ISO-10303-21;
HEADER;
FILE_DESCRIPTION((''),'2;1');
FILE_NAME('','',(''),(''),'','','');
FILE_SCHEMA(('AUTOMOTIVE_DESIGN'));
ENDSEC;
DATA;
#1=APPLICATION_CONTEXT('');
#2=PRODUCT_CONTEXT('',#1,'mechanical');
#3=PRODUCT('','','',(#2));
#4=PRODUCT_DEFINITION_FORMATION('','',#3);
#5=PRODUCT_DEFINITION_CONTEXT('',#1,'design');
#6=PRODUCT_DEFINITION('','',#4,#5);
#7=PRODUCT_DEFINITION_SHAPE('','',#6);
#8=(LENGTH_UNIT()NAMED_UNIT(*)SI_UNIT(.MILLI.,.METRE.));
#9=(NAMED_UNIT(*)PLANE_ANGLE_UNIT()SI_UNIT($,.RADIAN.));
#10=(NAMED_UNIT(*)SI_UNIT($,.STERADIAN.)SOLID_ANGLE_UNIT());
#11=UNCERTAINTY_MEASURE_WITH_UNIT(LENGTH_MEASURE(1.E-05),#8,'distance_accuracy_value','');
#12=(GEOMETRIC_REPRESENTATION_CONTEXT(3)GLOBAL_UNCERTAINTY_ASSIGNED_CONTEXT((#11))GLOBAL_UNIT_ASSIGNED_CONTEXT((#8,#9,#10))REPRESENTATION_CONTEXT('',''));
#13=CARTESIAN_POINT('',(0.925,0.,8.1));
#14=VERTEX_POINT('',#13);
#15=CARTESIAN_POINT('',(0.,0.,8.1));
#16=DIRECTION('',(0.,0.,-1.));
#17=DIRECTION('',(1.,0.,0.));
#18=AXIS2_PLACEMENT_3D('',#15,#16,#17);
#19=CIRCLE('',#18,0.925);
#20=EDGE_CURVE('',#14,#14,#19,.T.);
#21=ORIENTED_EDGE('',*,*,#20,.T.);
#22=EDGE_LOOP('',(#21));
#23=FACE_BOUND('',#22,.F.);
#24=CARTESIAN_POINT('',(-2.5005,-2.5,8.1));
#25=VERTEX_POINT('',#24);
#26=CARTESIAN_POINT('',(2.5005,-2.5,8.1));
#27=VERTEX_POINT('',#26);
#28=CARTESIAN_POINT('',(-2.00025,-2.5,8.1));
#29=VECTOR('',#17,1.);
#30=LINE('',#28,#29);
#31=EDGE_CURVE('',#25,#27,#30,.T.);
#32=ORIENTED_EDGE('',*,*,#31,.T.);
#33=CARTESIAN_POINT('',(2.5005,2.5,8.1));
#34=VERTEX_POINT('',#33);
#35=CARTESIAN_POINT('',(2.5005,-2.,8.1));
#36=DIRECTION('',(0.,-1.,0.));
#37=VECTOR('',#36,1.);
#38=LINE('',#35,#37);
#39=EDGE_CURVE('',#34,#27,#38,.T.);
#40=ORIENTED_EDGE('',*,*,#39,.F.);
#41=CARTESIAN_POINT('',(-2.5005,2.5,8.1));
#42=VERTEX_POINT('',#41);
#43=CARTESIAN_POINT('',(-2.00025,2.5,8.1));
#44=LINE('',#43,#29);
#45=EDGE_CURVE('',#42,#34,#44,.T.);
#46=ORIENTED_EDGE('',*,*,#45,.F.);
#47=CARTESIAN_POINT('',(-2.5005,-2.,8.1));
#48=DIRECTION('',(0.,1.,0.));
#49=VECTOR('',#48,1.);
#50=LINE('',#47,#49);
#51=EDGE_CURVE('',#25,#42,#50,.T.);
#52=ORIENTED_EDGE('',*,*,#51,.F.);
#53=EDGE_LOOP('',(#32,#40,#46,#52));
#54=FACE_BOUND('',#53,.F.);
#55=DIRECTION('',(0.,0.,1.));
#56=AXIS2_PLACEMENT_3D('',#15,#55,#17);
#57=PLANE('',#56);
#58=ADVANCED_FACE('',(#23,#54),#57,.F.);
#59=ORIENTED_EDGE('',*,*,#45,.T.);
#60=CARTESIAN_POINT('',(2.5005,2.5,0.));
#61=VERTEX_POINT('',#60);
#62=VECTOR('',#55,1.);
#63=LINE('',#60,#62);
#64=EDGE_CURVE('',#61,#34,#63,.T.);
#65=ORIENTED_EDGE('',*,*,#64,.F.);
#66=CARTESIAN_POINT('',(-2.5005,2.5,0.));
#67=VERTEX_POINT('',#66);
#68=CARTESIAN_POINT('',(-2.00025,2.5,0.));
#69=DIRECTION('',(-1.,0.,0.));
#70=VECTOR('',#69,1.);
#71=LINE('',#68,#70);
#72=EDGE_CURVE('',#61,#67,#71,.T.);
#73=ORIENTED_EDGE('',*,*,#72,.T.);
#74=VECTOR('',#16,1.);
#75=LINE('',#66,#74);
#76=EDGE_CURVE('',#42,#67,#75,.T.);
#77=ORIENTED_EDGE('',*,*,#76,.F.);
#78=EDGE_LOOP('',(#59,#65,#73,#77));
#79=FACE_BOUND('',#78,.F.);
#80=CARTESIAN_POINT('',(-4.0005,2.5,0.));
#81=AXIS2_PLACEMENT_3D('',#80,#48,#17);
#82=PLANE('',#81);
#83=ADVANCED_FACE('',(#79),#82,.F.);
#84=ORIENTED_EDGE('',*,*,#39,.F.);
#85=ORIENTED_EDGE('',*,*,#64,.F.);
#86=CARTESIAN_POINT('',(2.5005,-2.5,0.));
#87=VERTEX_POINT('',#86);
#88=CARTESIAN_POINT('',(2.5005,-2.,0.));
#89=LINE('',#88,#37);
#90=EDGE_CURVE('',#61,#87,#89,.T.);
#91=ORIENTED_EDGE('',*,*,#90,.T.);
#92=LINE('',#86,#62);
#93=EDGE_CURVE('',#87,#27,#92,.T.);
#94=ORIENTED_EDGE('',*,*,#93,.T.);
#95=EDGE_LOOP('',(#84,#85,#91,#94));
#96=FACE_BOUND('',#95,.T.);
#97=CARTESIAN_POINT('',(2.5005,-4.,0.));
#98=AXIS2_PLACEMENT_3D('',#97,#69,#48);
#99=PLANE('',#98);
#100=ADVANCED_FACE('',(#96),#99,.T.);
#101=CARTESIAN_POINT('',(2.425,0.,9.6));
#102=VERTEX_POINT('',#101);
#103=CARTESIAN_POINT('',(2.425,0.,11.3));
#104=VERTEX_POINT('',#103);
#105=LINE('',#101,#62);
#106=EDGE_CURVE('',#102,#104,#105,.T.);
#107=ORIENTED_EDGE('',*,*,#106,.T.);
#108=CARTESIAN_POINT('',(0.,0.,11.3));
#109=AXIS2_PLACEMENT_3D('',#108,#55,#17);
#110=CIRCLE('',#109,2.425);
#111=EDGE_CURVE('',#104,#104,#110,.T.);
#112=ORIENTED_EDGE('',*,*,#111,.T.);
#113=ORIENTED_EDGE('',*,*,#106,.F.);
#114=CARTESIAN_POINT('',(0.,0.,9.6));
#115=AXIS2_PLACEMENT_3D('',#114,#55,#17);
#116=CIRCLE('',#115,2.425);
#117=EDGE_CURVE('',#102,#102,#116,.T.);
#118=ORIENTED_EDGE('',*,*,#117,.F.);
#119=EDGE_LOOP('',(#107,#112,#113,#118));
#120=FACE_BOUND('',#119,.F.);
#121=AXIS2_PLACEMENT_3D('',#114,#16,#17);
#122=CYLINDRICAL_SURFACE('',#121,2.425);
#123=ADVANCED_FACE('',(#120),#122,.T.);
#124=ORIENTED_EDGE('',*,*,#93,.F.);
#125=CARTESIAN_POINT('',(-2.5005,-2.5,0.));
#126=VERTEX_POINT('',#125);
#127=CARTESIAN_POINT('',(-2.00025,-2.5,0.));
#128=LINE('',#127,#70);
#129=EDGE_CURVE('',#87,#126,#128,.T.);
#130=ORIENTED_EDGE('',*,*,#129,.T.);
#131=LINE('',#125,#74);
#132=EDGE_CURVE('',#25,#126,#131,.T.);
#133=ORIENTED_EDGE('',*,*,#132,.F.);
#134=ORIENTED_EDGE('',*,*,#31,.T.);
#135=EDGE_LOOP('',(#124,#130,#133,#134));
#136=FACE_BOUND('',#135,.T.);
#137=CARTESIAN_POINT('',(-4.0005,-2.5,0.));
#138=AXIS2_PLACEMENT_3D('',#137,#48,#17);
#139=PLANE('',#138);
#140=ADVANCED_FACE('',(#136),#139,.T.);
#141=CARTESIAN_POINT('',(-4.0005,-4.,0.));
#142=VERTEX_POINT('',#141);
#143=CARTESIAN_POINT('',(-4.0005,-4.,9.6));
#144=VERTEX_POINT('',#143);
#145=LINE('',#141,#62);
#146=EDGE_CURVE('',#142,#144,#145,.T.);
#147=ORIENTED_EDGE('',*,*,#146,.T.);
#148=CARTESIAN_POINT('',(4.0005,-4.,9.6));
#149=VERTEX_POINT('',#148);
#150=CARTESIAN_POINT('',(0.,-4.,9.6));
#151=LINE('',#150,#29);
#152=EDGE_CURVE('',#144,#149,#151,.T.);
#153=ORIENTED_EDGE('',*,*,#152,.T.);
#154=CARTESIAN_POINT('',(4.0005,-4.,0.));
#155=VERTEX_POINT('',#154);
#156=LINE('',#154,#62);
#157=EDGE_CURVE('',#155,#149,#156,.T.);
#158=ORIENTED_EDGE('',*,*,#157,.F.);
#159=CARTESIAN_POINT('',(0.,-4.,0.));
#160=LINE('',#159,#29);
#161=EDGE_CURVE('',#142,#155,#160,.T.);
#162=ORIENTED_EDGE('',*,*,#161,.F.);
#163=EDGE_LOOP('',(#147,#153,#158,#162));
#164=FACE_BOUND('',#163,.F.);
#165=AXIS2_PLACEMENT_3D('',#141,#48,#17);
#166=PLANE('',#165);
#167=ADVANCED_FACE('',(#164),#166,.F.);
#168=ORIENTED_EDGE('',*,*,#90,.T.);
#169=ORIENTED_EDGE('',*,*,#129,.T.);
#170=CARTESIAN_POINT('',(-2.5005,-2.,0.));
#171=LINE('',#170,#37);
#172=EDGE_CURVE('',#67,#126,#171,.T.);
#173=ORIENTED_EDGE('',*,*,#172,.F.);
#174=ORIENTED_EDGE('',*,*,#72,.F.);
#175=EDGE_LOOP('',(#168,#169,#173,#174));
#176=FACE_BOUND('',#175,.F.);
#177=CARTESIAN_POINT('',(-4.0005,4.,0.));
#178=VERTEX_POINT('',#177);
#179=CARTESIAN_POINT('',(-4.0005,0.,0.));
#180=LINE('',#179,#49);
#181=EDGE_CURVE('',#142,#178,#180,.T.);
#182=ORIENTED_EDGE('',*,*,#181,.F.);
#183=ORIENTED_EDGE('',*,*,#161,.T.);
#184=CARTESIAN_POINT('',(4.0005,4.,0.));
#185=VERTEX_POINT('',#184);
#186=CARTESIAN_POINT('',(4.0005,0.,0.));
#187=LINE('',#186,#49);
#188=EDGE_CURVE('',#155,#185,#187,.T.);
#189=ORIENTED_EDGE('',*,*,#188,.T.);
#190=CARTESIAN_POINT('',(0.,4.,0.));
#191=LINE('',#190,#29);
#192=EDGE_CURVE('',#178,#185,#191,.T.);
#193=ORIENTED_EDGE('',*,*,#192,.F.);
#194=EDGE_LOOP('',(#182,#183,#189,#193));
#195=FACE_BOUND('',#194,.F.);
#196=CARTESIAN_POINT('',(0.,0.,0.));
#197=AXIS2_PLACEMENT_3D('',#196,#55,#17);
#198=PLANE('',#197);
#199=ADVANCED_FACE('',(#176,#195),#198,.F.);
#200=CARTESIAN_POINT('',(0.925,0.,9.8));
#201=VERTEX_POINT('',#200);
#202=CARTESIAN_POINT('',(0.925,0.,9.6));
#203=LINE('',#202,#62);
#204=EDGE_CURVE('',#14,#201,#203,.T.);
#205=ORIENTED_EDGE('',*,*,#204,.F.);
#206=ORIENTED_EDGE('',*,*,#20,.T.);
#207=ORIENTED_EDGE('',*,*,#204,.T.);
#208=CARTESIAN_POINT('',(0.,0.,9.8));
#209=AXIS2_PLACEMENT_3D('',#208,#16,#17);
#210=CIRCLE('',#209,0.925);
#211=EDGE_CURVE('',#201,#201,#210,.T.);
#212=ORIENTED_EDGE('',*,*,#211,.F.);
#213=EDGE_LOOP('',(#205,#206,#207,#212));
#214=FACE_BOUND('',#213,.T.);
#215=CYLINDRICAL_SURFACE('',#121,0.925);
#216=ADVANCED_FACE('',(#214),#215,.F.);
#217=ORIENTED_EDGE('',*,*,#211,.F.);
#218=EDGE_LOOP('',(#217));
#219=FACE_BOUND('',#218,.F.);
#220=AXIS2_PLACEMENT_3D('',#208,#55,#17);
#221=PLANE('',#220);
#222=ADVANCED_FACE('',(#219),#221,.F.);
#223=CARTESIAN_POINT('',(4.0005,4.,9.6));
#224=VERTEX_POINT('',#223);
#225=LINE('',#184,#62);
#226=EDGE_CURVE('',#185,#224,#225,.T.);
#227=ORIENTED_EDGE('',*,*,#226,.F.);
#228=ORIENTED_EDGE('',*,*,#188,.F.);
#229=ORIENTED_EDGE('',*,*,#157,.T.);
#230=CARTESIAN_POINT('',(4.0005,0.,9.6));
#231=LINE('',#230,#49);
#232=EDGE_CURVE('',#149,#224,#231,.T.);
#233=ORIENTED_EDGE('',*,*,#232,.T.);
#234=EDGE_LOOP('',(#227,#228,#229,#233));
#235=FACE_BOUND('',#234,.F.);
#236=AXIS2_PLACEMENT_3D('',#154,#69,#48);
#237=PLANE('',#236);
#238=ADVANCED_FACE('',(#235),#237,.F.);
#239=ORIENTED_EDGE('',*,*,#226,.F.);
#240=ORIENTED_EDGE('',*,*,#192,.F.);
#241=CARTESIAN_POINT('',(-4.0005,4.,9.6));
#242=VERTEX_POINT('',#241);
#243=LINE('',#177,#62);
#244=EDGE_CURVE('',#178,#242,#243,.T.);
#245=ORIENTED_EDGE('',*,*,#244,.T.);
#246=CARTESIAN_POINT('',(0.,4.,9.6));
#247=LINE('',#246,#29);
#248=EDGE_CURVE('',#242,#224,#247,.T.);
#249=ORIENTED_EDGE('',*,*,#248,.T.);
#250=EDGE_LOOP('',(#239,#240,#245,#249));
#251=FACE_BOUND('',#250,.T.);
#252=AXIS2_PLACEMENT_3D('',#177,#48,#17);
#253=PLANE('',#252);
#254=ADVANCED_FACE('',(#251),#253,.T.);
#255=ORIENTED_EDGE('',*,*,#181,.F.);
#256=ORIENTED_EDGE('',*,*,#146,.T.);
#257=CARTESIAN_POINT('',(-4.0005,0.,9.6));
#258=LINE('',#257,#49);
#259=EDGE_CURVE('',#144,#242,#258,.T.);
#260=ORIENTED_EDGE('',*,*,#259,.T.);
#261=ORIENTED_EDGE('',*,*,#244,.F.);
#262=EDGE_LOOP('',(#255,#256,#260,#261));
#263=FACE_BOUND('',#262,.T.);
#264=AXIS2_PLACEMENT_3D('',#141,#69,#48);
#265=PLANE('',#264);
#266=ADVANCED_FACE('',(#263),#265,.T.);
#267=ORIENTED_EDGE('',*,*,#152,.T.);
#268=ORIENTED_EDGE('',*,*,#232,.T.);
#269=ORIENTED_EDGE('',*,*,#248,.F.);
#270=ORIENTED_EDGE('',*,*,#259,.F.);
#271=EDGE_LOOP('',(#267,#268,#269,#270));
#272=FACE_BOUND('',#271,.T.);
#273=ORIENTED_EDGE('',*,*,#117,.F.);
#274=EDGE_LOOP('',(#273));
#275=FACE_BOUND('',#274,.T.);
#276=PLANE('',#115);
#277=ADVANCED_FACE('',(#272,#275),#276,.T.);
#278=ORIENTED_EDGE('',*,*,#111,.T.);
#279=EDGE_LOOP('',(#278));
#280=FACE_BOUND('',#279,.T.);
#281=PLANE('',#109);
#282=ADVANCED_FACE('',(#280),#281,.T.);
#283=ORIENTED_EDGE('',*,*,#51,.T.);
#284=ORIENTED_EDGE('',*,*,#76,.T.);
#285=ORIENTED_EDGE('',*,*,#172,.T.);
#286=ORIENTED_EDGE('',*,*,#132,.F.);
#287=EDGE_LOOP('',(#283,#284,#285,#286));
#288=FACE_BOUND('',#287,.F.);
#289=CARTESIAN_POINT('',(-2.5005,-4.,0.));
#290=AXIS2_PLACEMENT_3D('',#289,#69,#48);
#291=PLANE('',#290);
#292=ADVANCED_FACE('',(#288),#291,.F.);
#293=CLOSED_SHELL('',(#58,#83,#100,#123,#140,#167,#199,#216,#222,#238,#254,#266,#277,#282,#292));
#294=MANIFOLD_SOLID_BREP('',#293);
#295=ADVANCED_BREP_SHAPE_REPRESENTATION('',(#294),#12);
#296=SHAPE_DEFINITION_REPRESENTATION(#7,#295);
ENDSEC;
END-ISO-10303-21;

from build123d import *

# Parameters (mm, degrees)
F0_W     = 8.001
F0_H     = 8
F1_DEPTH = 9.6
F2_R     = 2.425
F3_DEPTH = 1.7
F4_T     = -1.5


with BuildPart() as f1:
    # F0 (on Top) → F1 (new body)
    with BuildSketch(Plane.XY):
        Rectangle(F0_W, F0_H)
    extrude(amount=F1_DEPTH)

    # F2 (on face) → F3 (join)
    with BuildSketch(Plane.XY.offset(9.6)):
        Circle(F2_R)
    extrude(amount=F3_DEPTH)

    # F4
    f4_openings = [f1.faces().sort_by_distance(p)[0] for p in [
        (0, 0, 0),
    ]]
    offset(amount=F4_T, openings=f4_openings, kind=Kind.INTERSECTION)


solid = f1.part
